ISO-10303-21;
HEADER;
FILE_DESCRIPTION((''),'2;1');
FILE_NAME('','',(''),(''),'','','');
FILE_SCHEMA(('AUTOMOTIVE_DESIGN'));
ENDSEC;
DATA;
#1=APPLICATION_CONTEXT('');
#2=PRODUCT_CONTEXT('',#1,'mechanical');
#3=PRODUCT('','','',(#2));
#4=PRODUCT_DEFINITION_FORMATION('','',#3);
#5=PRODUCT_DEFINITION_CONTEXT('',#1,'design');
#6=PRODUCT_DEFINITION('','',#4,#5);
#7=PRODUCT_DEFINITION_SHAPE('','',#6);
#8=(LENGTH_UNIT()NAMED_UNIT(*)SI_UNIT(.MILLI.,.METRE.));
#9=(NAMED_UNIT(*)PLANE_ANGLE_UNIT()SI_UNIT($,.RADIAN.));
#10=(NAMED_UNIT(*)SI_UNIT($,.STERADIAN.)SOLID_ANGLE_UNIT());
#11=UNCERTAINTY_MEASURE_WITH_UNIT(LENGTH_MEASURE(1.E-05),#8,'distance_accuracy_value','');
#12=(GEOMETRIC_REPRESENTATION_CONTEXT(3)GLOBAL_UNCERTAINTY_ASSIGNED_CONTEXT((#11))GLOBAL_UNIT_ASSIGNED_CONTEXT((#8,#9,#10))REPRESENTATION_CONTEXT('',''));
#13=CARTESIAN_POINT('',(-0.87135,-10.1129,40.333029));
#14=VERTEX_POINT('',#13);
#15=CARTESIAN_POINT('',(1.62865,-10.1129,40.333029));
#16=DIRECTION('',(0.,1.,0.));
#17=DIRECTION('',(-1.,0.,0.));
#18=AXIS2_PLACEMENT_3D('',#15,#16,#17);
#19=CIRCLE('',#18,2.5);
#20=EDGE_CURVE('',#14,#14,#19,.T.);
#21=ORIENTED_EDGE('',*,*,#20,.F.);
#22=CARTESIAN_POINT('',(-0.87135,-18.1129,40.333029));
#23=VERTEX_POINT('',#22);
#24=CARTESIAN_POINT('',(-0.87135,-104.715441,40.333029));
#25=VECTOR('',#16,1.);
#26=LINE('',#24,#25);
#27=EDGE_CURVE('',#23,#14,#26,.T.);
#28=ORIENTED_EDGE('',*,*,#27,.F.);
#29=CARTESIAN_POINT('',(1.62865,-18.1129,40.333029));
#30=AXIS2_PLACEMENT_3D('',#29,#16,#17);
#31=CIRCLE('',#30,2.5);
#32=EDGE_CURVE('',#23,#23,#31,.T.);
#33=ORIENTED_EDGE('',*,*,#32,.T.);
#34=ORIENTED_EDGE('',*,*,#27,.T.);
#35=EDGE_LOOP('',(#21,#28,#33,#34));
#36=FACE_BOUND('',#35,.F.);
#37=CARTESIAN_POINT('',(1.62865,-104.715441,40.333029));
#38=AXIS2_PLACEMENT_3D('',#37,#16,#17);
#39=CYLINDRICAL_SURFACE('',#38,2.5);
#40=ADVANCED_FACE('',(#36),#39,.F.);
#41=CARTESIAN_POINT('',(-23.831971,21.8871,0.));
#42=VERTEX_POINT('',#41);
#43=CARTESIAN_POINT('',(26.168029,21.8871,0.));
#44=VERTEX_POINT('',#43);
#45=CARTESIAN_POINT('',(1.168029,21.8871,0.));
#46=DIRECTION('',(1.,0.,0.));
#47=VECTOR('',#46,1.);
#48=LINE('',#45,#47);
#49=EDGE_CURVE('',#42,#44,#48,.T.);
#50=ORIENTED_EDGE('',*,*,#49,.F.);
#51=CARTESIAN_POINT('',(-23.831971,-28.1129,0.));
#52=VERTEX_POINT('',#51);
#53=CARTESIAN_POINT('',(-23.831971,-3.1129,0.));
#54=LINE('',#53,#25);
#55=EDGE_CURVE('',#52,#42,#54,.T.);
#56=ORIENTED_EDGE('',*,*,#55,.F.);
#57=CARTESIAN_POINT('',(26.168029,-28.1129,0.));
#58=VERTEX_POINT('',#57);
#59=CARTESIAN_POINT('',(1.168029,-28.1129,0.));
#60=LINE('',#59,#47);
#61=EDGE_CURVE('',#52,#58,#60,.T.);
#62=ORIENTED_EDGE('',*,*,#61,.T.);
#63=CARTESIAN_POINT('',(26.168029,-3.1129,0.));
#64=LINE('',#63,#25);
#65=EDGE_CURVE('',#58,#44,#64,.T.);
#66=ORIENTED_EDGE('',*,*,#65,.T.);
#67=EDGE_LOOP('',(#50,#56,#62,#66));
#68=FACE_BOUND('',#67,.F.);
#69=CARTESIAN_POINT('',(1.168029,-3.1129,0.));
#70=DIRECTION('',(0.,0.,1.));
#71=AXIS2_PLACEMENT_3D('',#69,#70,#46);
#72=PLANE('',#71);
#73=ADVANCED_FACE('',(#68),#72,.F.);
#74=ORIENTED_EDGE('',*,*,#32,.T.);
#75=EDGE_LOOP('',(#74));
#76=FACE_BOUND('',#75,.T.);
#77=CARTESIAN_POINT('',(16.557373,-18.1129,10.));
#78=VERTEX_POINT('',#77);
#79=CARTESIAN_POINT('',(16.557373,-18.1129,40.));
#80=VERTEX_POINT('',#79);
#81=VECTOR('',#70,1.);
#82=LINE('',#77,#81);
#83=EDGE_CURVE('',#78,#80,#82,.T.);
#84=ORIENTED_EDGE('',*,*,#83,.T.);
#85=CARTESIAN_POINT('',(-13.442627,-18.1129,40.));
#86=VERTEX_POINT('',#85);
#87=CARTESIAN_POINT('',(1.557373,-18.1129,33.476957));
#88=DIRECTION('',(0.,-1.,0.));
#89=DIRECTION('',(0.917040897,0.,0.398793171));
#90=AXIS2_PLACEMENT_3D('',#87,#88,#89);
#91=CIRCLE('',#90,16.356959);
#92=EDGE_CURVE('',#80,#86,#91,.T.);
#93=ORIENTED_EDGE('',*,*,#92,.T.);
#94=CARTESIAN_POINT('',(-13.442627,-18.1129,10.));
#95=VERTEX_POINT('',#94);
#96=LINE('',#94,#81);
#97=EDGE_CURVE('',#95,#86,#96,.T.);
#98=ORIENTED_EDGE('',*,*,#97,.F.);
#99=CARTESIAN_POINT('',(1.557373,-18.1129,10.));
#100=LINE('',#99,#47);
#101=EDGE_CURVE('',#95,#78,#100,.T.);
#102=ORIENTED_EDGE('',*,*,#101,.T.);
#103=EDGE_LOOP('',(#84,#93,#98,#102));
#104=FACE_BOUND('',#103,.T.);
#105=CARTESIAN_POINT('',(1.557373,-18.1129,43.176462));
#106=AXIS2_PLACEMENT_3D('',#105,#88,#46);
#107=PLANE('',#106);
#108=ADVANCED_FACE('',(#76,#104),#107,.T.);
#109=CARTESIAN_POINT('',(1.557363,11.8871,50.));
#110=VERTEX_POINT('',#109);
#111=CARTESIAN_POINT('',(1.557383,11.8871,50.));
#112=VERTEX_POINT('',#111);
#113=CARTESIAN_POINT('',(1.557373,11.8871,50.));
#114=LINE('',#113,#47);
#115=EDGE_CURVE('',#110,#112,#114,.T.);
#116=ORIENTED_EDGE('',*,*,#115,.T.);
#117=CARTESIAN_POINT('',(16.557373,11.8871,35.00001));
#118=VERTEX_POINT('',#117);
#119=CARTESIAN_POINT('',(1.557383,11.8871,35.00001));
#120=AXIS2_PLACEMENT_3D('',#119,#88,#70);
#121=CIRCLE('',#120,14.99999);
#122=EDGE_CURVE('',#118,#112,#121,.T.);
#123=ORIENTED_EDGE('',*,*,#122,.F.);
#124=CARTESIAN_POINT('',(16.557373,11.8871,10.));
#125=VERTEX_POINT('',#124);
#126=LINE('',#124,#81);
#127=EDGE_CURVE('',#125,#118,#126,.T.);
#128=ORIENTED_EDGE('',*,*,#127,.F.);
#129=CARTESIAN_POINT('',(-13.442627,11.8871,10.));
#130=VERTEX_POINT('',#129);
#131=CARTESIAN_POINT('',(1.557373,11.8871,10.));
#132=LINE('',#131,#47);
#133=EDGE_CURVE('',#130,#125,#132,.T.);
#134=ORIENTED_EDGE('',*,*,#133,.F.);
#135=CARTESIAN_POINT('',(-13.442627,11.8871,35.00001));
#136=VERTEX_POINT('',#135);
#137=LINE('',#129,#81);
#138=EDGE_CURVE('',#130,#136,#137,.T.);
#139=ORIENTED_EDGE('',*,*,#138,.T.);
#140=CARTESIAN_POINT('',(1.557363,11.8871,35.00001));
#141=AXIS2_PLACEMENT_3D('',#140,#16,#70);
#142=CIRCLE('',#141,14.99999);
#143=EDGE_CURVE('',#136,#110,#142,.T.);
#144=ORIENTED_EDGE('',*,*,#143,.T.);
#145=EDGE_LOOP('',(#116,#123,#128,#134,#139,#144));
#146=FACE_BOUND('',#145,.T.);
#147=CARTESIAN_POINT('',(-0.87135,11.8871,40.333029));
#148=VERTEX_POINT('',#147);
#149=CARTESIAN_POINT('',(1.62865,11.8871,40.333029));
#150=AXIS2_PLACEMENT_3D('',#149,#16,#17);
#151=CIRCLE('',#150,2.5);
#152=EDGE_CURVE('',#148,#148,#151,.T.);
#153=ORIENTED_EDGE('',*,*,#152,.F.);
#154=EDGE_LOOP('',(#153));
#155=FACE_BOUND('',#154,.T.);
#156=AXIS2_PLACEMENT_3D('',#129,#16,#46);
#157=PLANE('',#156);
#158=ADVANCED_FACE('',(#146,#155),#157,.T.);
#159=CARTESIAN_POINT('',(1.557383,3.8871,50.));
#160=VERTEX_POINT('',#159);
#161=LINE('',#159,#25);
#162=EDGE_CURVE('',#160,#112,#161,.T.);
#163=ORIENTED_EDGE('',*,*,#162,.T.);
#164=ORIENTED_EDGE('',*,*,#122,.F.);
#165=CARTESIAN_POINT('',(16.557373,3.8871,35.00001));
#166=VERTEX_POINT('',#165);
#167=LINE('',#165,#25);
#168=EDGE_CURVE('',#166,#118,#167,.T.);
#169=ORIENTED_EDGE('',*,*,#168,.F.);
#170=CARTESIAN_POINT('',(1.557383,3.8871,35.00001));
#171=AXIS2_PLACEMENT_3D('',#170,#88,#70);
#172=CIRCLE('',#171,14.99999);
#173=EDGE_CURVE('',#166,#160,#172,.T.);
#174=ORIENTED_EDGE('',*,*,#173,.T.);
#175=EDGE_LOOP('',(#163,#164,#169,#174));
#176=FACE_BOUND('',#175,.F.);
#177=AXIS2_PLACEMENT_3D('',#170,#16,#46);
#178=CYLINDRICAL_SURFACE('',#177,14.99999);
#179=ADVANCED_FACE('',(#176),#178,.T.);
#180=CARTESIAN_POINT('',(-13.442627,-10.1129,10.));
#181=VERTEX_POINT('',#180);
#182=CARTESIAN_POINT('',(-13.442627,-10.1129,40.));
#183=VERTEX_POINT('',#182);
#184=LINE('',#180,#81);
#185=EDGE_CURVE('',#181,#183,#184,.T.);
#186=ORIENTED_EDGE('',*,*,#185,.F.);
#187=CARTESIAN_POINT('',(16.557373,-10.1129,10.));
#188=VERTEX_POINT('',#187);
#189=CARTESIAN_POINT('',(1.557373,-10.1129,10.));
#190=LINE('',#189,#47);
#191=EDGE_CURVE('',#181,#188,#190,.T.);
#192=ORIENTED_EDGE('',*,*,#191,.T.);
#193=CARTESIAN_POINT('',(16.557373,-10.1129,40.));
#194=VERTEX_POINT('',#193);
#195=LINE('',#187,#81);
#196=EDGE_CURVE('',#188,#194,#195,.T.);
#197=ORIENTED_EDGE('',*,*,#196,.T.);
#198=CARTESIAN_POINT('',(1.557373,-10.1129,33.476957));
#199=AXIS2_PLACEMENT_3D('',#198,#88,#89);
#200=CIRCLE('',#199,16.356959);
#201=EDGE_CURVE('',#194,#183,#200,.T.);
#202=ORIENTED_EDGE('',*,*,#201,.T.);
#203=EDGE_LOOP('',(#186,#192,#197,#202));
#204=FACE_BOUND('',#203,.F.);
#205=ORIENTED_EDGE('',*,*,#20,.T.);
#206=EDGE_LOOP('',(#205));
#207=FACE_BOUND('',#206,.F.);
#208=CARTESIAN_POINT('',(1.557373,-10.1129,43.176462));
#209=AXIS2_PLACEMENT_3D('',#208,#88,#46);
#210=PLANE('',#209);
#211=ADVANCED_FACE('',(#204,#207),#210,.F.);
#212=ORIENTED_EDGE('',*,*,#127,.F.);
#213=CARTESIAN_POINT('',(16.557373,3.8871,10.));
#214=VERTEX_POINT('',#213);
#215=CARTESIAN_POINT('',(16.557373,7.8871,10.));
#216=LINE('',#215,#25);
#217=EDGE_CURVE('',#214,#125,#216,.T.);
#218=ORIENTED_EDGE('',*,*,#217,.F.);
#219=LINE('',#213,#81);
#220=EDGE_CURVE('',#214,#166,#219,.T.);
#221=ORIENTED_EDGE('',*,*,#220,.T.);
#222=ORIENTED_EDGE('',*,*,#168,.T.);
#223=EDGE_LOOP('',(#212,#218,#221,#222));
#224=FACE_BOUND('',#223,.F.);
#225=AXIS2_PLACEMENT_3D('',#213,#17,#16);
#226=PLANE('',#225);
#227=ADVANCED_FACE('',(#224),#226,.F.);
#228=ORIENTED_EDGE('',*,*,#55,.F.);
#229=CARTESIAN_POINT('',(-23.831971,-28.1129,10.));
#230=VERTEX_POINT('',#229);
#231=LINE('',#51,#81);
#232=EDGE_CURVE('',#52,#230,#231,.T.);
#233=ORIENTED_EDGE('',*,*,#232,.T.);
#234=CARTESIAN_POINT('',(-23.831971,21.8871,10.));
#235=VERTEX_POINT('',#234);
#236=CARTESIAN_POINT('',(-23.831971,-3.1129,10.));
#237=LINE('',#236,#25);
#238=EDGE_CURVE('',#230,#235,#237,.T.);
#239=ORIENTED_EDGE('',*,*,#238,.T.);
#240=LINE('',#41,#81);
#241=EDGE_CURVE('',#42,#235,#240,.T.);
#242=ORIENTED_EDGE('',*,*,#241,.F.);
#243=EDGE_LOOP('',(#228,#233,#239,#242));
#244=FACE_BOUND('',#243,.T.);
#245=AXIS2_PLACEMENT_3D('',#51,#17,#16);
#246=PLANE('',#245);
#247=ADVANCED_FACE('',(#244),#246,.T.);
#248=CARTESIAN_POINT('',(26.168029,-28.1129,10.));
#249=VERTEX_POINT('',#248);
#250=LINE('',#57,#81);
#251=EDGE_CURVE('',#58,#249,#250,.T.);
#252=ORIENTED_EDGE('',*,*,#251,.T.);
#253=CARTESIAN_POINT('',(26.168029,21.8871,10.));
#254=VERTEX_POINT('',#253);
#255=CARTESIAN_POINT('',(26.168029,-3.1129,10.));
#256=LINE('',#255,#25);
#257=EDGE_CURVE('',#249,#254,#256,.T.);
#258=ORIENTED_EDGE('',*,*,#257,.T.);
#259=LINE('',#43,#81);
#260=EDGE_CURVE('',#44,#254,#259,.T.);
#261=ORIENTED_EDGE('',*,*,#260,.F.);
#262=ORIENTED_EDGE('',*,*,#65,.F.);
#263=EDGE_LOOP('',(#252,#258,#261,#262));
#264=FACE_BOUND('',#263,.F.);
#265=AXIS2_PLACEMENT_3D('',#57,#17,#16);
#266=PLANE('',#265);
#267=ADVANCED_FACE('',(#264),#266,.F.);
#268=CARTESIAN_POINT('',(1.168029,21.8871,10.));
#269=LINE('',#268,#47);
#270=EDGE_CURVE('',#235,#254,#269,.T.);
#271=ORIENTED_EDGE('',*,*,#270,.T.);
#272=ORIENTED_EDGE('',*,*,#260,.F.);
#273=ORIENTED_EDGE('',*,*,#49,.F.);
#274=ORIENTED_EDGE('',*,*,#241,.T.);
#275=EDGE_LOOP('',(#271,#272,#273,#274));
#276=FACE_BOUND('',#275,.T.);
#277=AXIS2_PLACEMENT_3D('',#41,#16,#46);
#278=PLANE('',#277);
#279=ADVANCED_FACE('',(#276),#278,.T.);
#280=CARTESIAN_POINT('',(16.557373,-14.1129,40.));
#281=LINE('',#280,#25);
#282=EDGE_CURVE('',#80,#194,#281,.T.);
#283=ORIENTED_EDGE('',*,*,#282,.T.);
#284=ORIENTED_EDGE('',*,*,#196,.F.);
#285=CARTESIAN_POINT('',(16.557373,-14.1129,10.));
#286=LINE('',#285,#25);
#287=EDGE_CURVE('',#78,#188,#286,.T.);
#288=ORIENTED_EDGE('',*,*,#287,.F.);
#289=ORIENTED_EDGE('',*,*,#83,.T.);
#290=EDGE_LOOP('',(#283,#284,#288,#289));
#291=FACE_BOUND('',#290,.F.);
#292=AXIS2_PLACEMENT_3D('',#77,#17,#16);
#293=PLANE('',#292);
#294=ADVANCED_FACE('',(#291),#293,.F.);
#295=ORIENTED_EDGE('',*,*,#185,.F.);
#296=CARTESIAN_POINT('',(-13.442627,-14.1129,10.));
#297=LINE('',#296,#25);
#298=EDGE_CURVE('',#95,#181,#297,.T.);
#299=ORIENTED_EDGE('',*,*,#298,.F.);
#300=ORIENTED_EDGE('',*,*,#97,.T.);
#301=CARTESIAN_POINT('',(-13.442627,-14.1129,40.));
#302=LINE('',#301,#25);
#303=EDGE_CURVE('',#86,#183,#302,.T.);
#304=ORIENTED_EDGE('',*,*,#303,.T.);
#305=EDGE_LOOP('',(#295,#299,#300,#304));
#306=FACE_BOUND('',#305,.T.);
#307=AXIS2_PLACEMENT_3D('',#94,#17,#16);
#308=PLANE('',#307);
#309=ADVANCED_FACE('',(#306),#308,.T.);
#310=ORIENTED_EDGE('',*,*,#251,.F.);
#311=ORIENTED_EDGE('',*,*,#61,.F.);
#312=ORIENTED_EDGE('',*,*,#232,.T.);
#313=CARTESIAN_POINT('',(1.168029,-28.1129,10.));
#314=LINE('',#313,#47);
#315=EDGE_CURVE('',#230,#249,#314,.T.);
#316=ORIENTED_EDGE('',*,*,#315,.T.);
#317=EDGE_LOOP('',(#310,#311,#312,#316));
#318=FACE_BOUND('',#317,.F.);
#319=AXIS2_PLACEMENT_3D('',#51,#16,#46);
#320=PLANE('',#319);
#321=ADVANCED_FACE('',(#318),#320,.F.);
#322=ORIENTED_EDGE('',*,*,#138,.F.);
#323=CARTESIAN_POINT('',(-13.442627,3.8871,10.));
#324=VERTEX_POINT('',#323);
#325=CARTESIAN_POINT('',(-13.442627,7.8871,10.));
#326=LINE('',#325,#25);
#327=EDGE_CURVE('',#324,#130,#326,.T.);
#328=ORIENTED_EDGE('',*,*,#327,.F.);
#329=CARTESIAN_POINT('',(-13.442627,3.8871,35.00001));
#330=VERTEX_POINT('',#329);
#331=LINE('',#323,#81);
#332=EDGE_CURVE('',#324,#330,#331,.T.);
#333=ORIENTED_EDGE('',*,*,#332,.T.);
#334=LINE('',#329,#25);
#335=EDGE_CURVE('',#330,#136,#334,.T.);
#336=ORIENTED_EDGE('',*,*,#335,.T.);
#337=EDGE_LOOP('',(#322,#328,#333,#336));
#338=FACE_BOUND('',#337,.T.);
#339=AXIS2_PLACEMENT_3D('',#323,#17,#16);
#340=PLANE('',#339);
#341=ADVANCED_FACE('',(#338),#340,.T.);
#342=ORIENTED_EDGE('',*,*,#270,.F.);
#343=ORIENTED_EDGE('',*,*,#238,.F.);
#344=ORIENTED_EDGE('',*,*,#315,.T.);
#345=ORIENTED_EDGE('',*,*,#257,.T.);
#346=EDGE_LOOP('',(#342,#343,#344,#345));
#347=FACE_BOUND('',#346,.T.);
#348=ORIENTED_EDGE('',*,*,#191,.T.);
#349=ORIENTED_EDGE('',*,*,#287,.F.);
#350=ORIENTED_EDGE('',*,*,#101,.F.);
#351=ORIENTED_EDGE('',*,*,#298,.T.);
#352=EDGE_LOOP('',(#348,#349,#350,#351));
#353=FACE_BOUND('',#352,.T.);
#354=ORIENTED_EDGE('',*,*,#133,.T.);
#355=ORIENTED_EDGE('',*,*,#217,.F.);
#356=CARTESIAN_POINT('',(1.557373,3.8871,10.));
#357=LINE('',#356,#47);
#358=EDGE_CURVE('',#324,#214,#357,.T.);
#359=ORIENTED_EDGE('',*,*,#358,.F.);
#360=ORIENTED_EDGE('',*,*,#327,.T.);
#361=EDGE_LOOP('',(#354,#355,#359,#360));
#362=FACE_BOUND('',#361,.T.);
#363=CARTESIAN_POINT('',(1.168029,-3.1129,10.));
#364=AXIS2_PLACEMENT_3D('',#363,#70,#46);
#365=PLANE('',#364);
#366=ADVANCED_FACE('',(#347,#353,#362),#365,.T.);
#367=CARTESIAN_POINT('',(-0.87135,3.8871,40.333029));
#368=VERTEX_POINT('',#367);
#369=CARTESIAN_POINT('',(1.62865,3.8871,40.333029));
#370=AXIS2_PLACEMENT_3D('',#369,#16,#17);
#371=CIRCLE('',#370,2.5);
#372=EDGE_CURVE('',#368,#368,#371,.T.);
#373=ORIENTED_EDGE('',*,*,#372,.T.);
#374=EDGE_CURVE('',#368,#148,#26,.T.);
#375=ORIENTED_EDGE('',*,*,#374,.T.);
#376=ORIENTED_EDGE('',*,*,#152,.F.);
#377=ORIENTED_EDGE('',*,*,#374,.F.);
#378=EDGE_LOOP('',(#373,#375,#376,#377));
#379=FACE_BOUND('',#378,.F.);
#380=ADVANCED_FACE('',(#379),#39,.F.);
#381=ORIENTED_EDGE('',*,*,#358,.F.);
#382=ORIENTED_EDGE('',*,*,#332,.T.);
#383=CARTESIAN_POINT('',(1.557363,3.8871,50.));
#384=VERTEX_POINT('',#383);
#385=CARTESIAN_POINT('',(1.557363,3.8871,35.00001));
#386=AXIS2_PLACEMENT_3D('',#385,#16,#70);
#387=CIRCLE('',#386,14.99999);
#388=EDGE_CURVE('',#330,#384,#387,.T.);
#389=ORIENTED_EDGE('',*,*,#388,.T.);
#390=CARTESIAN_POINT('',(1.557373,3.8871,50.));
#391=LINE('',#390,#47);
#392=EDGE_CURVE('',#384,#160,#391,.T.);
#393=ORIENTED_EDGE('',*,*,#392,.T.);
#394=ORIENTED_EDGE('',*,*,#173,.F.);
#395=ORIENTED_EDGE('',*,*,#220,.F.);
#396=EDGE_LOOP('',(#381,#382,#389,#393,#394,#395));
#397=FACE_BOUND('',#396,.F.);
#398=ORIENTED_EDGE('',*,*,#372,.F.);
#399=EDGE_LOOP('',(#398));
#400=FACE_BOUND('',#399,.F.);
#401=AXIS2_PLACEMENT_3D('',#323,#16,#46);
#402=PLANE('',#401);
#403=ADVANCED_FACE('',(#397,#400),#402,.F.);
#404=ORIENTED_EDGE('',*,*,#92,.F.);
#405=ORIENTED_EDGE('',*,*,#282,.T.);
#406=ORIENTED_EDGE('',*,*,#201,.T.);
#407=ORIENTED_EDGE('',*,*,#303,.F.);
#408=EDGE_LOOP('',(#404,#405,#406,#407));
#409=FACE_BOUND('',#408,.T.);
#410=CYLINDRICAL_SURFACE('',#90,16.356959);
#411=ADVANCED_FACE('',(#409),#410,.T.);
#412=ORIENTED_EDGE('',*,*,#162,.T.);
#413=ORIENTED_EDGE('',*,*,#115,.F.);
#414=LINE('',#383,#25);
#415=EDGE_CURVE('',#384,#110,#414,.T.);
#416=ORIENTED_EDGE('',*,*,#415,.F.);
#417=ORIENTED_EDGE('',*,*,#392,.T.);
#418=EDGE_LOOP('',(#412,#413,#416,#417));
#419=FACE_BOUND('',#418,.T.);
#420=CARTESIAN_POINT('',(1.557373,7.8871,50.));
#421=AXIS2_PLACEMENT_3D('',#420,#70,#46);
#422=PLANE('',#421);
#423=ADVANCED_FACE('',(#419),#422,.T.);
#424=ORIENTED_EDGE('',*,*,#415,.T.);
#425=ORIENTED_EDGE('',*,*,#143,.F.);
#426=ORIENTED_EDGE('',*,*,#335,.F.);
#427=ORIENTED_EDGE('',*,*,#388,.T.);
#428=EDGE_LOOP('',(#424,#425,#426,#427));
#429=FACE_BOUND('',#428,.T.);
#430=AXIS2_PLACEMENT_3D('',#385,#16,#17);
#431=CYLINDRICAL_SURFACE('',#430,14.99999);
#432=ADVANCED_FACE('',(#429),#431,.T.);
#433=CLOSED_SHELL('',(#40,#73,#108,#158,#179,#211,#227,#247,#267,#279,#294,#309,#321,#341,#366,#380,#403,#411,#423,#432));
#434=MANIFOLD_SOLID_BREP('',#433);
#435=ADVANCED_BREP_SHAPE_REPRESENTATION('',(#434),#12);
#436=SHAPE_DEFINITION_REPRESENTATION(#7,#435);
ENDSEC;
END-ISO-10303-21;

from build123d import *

# Parameters (mm, degrees)
F0_W     = 50
F0_H     = 50
F1_DEPTH = 10
F2_W     = 30
F2_H     = 8
F3_DEPTH = 40
F4_W     = 30
F4_H     = 8
F5_DEPTH = 30
F7_DEPTH = 8
F9_R     = 14.99999
F11_D    = 5


# Not quite as in the source:
# - a fillet or chamfer is up to 0.001 mm smaller than in the source, because OpenCascade refuses the exact size


with BuildPart() as f1:
    # F0 (on Top) → F1 (new body)
    with BuildSketch(Plane.XY):
        with Locations((1.1680293828, -3.1129003775)):
            Rectangle(F0_W, F0_H)
    extrude(amount=F1_DEPTH)

    # F2 (on face) → F3 (join)
    with BuildSketch(Plane.XY.offset(10)):
        with Locations((1.5573729761, 7.8870996225)):
            Rectangle(F2_W, F2_H)
    extrude(amount=F3_DEPTH)

    # F4 (on face) → F5 (join)
    with BuildSketch(Plane.XY.offset(10)):
        with Locations((1.5573729761, -14.1129003775)):
            Rectangle(F4_W, F4_H)
    extrude(amount=F5_DEPTH)

    # F6 (on face) → F7 (join)
    with BuildSketch(Plane.XZ.offset(18.1129003775)):
        with BuildLine():
            Line((-13.4426270239, 40), (16.5573729761, 40))
            ThreePointArc((16.5573729761, 40), (1.5573729761, 49.8339152222), (-13.4426270239, 40))
        make_face()
    extrude(amount=-F7_DEPTH)

    # F9 (radius 15 in the source; OpenCascade refuses exactly that, so slightly less here)
    f9_edges = [f1.edges().sort_by_distance(p)[0] for p in [
        (16.557373, 7.8871, 50),
        (-13.442627, 7.8871, 50),
    ]]
    fillet(f9_edges, radius=F9_R)

    # F11 (through all)
    with Locations(Plane.XZ.offset(18.1129003775)):
        with Locations((1.6286504688, 40.3330288827)):
            Hole(F11_D / 2)


solid = f1.part
